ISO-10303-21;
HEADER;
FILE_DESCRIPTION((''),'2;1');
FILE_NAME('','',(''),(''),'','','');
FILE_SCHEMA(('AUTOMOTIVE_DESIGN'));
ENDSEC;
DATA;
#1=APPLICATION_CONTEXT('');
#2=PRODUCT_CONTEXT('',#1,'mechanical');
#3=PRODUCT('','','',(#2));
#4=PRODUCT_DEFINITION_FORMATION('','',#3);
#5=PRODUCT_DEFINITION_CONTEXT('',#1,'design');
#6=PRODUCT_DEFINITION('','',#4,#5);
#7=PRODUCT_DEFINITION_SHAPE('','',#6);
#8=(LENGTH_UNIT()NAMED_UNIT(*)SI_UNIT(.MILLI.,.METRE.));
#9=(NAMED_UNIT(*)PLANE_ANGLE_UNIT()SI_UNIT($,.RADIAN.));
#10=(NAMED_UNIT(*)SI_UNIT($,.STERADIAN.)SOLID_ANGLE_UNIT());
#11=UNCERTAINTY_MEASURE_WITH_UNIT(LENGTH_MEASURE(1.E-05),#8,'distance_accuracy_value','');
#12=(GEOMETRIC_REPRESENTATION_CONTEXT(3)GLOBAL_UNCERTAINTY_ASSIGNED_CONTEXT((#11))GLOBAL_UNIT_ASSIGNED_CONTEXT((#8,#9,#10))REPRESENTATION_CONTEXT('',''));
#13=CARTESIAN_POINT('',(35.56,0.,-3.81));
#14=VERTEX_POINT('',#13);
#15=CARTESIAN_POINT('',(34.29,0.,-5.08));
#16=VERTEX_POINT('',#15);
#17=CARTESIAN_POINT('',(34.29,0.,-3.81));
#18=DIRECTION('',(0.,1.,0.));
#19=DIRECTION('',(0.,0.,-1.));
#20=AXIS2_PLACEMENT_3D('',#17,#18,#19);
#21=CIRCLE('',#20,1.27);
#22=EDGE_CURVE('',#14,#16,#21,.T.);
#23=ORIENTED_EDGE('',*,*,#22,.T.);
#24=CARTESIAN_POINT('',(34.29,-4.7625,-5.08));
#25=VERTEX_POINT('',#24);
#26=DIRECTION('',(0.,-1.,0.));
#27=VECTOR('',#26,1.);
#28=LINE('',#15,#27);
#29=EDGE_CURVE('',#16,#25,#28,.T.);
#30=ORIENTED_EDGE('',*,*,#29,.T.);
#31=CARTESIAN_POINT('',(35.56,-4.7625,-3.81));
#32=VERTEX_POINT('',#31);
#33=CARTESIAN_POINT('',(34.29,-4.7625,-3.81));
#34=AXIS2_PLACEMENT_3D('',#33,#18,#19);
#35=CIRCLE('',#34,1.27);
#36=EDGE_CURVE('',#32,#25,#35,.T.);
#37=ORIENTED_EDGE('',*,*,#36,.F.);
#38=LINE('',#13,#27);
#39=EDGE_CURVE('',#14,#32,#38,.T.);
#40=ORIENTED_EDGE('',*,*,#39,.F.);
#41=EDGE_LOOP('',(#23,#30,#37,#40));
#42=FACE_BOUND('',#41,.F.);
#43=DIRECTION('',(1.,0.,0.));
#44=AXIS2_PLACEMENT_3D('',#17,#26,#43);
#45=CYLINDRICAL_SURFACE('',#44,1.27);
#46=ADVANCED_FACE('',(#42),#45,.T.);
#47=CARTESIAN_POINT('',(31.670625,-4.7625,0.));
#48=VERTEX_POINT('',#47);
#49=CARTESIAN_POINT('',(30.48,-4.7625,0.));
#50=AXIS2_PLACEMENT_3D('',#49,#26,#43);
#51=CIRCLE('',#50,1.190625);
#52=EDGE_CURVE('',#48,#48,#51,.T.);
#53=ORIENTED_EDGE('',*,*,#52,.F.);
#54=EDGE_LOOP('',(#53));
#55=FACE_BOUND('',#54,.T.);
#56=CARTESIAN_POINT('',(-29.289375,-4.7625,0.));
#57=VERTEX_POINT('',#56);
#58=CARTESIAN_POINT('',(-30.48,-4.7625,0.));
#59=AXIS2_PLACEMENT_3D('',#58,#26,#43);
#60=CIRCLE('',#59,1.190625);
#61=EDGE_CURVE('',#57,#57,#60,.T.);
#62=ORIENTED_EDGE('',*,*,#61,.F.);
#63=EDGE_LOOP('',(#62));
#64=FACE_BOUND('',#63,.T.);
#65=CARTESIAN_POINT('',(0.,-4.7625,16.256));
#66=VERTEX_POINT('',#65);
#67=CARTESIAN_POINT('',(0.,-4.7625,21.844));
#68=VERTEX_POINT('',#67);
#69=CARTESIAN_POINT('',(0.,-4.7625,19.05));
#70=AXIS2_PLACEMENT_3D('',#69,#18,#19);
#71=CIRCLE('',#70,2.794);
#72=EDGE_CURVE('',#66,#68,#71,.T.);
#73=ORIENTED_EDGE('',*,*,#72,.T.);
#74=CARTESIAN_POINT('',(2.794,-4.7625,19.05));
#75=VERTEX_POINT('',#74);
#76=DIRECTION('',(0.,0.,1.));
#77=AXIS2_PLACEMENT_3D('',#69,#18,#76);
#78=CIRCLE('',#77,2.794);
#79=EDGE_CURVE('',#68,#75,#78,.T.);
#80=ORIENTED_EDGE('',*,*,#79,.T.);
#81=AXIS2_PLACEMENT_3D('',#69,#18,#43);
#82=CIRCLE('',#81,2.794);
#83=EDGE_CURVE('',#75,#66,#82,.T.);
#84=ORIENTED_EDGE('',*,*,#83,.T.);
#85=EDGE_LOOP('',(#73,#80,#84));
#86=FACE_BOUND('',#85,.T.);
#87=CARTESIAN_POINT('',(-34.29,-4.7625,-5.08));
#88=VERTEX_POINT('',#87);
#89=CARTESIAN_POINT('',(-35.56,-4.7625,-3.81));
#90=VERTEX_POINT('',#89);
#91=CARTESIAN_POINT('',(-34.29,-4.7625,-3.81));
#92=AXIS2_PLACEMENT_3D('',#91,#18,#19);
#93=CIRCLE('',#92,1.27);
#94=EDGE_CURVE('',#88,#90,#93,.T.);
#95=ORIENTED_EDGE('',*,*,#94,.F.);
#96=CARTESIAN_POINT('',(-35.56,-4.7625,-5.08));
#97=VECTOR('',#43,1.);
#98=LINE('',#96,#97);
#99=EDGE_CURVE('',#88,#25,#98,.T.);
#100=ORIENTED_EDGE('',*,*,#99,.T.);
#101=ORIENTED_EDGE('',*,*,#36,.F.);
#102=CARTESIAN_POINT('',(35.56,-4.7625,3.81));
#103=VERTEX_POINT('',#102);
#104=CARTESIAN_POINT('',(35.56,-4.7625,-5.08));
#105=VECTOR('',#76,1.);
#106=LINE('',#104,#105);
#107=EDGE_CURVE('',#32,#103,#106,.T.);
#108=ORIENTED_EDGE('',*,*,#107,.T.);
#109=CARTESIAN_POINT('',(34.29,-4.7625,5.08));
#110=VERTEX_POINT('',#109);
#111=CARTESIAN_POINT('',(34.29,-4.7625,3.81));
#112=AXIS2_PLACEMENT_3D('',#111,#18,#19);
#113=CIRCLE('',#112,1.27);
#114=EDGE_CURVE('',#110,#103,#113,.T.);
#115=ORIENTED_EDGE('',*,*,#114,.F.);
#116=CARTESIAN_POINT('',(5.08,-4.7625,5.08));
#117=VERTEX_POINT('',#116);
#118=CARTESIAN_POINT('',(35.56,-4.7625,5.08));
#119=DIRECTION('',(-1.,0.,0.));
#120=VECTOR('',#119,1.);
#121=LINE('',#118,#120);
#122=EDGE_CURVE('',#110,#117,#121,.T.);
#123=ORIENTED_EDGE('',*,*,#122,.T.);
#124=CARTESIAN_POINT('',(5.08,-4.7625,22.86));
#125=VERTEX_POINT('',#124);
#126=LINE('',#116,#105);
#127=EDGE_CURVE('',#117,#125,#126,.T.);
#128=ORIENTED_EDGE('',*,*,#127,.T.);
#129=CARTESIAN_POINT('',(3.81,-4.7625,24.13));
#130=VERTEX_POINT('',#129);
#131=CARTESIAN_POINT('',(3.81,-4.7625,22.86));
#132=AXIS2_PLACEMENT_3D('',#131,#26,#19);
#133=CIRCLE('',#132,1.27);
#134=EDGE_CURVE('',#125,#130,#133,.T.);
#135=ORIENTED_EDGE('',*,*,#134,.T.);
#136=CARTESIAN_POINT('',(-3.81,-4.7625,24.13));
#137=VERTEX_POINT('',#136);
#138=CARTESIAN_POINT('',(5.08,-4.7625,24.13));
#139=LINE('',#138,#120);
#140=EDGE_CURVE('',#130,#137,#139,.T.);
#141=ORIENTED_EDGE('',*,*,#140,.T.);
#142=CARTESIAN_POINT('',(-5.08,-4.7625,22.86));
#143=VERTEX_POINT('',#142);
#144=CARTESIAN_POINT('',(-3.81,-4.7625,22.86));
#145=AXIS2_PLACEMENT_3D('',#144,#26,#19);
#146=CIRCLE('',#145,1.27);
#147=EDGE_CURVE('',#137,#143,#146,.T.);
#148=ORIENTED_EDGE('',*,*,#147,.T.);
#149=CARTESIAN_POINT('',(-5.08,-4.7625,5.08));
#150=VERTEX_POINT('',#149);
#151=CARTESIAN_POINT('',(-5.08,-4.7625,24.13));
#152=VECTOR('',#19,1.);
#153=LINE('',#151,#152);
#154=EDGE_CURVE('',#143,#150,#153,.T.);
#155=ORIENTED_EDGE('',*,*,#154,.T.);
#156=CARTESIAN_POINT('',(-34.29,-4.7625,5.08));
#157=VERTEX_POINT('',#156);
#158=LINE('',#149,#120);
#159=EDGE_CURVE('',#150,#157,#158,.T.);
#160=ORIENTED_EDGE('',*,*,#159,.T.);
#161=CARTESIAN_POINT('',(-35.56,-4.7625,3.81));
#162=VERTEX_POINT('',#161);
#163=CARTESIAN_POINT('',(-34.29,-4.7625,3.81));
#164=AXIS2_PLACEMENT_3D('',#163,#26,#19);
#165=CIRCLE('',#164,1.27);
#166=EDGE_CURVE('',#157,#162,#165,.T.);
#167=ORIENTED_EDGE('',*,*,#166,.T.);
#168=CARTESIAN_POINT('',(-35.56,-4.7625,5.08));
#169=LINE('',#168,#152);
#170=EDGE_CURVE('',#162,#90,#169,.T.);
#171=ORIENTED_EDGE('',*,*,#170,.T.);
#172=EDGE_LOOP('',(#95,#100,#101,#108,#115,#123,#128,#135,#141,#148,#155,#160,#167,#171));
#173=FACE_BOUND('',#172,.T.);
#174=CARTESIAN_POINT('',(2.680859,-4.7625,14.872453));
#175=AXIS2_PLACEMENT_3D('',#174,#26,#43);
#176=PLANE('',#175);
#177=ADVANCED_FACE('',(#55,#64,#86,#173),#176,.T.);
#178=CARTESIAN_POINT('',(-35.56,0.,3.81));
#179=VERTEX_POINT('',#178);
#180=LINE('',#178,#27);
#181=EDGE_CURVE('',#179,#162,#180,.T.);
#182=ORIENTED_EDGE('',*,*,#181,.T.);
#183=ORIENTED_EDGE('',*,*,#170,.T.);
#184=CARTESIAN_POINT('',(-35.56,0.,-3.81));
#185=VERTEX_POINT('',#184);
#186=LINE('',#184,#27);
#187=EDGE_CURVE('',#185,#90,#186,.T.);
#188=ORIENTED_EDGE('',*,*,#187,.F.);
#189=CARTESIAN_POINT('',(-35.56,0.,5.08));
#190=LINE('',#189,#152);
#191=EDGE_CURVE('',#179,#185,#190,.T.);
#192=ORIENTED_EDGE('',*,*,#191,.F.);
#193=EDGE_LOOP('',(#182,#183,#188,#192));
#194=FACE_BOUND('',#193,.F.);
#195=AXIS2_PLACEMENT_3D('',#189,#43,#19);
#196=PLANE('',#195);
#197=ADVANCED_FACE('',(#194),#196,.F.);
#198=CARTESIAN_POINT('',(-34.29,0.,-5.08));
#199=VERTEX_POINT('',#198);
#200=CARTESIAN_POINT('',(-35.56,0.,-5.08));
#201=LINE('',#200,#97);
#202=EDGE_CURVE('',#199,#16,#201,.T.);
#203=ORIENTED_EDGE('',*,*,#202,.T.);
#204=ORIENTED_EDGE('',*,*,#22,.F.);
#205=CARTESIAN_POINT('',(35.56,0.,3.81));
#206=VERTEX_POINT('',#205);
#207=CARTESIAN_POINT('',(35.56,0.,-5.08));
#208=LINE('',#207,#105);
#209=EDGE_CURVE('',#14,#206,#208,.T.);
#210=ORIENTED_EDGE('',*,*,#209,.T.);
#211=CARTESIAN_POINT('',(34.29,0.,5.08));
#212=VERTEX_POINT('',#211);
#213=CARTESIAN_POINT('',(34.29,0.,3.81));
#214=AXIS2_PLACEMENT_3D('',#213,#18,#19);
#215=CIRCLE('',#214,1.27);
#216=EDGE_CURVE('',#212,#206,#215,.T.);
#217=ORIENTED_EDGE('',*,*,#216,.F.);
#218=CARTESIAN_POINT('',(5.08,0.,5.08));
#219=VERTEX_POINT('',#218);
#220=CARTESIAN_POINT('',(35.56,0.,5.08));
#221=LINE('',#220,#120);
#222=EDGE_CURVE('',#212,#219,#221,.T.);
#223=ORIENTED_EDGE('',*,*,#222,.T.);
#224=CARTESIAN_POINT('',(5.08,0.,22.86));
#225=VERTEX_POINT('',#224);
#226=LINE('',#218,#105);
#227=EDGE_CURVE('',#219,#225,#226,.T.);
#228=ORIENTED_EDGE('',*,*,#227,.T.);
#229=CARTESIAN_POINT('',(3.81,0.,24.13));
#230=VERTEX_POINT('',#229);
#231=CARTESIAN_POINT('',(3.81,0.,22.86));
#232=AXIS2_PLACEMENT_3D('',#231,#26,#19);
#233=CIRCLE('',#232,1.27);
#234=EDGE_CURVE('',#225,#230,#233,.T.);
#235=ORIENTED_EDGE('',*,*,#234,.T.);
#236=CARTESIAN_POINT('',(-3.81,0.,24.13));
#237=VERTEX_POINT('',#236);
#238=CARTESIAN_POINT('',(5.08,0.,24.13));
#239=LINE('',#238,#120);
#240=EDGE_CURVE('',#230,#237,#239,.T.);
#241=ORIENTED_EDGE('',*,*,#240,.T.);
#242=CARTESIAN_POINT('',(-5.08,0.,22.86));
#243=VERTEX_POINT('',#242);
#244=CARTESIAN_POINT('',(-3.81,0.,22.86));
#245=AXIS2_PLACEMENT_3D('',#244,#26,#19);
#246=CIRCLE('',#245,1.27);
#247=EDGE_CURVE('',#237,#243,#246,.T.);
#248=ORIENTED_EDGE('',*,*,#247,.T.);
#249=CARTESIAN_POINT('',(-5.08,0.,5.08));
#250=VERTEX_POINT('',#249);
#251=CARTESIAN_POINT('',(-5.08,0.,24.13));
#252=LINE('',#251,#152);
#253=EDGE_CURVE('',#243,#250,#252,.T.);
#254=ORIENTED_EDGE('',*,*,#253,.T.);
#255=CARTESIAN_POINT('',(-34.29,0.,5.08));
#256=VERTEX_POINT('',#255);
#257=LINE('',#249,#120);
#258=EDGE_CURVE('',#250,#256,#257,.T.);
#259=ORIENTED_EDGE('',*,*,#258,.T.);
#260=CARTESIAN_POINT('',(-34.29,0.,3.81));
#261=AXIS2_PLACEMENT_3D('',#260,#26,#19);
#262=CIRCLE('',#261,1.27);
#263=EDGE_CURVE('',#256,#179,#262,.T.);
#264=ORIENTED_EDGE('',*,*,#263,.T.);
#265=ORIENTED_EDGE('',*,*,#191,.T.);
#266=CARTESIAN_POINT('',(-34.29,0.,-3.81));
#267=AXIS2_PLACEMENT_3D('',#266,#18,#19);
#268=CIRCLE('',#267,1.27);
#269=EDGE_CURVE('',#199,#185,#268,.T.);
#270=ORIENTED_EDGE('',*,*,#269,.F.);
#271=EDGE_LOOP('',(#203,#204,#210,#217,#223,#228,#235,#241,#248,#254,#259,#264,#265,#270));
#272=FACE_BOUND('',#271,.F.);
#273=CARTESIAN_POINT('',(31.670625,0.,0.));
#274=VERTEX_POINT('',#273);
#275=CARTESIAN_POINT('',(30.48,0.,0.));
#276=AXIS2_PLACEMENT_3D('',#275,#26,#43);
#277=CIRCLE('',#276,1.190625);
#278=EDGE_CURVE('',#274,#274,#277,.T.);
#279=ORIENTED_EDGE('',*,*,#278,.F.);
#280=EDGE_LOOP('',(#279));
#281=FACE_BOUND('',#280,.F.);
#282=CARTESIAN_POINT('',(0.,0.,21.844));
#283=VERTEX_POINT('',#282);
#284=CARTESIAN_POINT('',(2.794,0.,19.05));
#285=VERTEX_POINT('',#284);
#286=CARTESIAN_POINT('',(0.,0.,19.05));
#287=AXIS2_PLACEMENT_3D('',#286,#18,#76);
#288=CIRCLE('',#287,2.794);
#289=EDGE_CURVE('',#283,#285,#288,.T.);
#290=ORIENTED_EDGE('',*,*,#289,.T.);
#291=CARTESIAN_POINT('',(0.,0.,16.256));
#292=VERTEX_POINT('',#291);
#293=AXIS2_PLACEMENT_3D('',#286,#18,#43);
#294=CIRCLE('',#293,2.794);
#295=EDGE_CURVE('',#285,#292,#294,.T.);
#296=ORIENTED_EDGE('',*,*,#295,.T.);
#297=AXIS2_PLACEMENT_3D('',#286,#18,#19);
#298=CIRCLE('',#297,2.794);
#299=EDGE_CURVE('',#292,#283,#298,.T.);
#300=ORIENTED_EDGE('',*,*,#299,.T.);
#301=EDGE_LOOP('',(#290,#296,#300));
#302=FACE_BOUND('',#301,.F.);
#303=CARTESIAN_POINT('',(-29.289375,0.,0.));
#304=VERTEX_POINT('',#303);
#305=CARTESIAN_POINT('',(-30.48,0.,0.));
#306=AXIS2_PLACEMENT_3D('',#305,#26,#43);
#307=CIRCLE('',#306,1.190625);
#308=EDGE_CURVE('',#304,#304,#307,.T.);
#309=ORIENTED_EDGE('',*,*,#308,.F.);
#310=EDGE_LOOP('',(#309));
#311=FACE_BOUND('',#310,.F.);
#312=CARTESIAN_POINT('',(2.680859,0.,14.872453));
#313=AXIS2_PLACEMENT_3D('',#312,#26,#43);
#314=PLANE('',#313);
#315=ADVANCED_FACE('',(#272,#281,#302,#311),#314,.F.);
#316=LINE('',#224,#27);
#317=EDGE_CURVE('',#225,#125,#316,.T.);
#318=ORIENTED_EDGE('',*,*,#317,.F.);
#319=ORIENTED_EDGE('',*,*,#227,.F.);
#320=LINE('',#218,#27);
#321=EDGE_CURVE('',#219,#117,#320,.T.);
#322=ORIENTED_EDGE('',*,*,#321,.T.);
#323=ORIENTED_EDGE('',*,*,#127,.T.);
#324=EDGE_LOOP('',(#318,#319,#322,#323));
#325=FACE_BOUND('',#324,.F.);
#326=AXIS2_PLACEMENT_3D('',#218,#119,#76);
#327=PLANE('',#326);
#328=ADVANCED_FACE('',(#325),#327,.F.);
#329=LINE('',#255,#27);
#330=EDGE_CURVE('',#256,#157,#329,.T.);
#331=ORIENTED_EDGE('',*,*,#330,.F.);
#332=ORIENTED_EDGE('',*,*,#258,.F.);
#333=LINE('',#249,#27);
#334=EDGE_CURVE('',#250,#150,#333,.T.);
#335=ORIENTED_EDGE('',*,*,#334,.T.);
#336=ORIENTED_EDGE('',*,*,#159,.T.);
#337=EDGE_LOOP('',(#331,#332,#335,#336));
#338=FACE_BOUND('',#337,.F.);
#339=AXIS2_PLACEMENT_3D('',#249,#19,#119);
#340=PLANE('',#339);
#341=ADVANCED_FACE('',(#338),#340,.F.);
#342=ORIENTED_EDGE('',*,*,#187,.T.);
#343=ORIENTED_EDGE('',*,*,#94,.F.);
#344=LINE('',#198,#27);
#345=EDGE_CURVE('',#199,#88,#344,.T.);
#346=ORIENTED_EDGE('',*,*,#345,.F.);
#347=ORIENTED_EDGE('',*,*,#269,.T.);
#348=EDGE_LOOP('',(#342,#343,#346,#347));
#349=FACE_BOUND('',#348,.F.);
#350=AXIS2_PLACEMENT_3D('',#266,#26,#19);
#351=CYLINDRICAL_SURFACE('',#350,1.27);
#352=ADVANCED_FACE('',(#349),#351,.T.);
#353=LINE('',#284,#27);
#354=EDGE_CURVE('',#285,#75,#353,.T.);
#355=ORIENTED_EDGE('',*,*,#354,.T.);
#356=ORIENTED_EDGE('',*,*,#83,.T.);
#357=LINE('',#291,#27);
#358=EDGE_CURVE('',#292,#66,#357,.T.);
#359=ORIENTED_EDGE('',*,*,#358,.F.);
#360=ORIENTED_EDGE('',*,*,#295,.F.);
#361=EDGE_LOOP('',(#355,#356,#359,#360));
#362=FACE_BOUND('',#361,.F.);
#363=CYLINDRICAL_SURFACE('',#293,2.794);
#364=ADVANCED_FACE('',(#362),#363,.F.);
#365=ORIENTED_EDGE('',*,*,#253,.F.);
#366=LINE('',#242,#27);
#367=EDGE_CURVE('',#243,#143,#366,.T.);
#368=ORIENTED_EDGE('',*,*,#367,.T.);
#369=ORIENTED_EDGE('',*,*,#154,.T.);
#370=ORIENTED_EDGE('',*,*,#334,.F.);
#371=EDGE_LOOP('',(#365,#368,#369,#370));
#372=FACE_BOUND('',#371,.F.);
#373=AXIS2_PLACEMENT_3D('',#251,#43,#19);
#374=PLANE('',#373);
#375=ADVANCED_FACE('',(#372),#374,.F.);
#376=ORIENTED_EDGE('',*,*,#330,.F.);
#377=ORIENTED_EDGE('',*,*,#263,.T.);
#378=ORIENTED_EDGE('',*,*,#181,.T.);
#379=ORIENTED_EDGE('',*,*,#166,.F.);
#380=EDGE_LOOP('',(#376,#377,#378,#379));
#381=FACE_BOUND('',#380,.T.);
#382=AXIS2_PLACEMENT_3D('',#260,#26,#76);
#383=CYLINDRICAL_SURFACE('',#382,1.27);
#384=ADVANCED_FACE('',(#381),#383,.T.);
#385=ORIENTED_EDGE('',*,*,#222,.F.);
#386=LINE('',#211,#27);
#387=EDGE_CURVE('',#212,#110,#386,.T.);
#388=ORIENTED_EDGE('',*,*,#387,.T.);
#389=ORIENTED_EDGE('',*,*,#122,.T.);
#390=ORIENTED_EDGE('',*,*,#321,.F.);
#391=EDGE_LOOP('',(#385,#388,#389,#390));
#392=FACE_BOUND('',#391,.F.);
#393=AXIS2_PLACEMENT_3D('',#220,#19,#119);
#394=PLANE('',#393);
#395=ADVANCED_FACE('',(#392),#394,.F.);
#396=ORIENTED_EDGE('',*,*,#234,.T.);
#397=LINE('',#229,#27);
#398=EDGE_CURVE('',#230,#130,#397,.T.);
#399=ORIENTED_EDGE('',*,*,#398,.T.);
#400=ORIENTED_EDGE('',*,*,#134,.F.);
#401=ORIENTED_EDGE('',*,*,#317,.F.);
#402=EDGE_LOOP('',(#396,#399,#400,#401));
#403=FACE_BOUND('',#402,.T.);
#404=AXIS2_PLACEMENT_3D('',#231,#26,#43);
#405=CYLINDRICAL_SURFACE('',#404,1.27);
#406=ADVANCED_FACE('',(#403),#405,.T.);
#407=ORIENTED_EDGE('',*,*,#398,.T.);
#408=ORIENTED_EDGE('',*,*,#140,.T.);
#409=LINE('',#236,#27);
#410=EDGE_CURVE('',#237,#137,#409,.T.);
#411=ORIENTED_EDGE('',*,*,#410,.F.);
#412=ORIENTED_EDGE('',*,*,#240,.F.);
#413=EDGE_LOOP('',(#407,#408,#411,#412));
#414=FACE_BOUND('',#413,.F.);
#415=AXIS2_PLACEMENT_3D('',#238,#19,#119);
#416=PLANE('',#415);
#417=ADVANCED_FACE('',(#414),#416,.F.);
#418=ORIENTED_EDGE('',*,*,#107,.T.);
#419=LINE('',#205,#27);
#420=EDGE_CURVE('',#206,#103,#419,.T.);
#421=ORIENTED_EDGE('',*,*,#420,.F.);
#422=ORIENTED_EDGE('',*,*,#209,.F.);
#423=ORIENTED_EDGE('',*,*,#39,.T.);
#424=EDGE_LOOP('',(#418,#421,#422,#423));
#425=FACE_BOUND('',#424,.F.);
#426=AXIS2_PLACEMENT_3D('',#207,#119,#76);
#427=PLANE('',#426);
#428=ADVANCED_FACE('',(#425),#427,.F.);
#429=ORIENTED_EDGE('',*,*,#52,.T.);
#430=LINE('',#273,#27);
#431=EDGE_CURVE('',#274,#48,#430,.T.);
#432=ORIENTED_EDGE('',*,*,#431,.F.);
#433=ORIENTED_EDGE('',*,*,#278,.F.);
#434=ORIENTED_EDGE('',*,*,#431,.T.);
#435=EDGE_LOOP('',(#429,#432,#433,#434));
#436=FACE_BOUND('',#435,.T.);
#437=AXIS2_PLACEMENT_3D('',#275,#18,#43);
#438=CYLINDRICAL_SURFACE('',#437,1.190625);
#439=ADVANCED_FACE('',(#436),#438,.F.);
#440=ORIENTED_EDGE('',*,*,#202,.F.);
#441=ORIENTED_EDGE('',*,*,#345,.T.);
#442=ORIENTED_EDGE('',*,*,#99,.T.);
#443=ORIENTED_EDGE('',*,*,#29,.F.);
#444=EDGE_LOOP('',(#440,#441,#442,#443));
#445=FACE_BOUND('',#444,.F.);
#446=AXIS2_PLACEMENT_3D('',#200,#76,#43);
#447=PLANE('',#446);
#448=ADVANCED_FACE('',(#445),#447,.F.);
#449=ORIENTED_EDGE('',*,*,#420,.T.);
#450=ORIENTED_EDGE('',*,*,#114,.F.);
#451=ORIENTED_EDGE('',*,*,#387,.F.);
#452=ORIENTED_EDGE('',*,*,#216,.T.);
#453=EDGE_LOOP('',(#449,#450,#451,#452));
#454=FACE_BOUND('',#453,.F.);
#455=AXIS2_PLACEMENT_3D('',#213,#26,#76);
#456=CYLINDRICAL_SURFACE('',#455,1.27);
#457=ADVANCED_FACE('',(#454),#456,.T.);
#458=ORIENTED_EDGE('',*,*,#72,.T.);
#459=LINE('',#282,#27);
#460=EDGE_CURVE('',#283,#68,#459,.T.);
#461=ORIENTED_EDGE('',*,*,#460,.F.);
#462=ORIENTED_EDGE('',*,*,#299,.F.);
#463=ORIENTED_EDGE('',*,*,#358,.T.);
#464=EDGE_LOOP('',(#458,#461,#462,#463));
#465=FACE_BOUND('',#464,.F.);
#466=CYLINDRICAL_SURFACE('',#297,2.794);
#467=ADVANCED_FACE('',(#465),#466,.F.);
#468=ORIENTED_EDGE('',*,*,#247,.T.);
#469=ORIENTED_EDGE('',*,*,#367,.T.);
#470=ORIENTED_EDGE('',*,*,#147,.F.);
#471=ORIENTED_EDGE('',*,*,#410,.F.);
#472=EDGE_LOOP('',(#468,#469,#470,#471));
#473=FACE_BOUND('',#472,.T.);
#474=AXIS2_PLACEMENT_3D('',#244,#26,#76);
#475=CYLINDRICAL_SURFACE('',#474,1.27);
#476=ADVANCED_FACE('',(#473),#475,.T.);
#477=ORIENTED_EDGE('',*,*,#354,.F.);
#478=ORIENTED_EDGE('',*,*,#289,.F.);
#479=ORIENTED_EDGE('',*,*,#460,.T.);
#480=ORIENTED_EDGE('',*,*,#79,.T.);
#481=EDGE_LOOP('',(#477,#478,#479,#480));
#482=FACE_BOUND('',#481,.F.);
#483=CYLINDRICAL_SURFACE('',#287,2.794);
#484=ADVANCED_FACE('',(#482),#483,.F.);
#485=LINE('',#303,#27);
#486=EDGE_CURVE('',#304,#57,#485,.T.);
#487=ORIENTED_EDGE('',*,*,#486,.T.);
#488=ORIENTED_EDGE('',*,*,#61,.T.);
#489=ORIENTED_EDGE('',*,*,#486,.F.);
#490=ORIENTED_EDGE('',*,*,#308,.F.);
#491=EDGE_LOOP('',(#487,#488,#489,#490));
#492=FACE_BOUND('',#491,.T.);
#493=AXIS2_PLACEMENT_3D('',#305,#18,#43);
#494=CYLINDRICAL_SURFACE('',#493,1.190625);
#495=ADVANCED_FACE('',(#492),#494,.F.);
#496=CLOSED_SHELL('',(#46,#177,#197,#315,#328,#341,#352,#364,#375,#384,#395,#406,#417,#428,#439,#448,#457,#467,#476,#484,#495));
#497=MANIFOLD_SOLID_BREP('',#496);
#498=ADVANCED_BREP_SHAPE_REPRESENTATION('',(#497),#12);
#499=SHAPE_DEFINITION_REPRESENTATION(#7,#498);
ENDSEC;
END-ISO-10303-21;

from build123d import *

# Parameters (mm, degrees)
F0_R     = 1.190625
F1_DEPTH = 4.7625
F2_R     = 1.27


# Not quite as in the source:
# - a feature names something its author has since deleted; it is built from what else it names


with BuildPart() as f1:
    # F0 (on Front) → F1 (new body)
    with BuildSketch(Plane.XZ):
        with BuildLine():
            Line((0, 5.08), (5.08, 5.08))
            Line((5.08, 5.08), (5.08, 14.605))
            Line((5.08, 14.605), (5.08, 24.13))
            Line((5.08, 24.13), (0, 24.13))
            Line((0, 24.13), (0, 21.844))
            ThreePointArc((0, 21.844), (1.9756563466, 21.0256563466), (2.794, 19.05))
            ThreePointArc((2.794, 19.05), (1.9756563466, 17.0743436534), (0, 16.256))
            Line((0, 16.256), (0, 5.08))
        make_face()
        with BuildLine():
            Line((-5.08, 5.08), (0, 5.08))
            Line((0, 5.08), (0, 16.256))
            ThreePointArc((0, 16.256), (-2.794, 19.05), (0, 21.844))
            Line((0, 21.844), (0, 24.13))
            Line((0, 24.13), (-5.08, 24.13))
            Line((-5.08, 24.13), (-5.08, 5.08))
        make_face()
        Polygon((35.56, -5.08), (35.56, 5.08), (5.08, 5.08), (0, 5.08), (-5.08, 5.08), (-35.56, 5.08), (-35.56, -5.08), align=None)
        with Locations((-30.48, 0)):
            Circle(F0_R, mode=Mode.SUBTRACT)
        with Locations((30.48, 0)):
            Circle(F0_R, mode=Mode.SUBTRACT)
    extrude(amount=F1_DEPTH)

    # F2
    f2_edges = [f1.edges().sort_by_distance(p)[0] for p in [
        (-5.08, -2.38125, 24.13),
        (5.08, -2.38125, 24.13),
        (35.56, -2.38125, 5.08),
        (35.56, -2.38125, -5.08),
        (-35.56, -2.38125, -5.08),
        (-35.56, -2.38125, 5.08),
    ]]
    fillet(f2_edges, radius=F2_R)


solid = f1.part
